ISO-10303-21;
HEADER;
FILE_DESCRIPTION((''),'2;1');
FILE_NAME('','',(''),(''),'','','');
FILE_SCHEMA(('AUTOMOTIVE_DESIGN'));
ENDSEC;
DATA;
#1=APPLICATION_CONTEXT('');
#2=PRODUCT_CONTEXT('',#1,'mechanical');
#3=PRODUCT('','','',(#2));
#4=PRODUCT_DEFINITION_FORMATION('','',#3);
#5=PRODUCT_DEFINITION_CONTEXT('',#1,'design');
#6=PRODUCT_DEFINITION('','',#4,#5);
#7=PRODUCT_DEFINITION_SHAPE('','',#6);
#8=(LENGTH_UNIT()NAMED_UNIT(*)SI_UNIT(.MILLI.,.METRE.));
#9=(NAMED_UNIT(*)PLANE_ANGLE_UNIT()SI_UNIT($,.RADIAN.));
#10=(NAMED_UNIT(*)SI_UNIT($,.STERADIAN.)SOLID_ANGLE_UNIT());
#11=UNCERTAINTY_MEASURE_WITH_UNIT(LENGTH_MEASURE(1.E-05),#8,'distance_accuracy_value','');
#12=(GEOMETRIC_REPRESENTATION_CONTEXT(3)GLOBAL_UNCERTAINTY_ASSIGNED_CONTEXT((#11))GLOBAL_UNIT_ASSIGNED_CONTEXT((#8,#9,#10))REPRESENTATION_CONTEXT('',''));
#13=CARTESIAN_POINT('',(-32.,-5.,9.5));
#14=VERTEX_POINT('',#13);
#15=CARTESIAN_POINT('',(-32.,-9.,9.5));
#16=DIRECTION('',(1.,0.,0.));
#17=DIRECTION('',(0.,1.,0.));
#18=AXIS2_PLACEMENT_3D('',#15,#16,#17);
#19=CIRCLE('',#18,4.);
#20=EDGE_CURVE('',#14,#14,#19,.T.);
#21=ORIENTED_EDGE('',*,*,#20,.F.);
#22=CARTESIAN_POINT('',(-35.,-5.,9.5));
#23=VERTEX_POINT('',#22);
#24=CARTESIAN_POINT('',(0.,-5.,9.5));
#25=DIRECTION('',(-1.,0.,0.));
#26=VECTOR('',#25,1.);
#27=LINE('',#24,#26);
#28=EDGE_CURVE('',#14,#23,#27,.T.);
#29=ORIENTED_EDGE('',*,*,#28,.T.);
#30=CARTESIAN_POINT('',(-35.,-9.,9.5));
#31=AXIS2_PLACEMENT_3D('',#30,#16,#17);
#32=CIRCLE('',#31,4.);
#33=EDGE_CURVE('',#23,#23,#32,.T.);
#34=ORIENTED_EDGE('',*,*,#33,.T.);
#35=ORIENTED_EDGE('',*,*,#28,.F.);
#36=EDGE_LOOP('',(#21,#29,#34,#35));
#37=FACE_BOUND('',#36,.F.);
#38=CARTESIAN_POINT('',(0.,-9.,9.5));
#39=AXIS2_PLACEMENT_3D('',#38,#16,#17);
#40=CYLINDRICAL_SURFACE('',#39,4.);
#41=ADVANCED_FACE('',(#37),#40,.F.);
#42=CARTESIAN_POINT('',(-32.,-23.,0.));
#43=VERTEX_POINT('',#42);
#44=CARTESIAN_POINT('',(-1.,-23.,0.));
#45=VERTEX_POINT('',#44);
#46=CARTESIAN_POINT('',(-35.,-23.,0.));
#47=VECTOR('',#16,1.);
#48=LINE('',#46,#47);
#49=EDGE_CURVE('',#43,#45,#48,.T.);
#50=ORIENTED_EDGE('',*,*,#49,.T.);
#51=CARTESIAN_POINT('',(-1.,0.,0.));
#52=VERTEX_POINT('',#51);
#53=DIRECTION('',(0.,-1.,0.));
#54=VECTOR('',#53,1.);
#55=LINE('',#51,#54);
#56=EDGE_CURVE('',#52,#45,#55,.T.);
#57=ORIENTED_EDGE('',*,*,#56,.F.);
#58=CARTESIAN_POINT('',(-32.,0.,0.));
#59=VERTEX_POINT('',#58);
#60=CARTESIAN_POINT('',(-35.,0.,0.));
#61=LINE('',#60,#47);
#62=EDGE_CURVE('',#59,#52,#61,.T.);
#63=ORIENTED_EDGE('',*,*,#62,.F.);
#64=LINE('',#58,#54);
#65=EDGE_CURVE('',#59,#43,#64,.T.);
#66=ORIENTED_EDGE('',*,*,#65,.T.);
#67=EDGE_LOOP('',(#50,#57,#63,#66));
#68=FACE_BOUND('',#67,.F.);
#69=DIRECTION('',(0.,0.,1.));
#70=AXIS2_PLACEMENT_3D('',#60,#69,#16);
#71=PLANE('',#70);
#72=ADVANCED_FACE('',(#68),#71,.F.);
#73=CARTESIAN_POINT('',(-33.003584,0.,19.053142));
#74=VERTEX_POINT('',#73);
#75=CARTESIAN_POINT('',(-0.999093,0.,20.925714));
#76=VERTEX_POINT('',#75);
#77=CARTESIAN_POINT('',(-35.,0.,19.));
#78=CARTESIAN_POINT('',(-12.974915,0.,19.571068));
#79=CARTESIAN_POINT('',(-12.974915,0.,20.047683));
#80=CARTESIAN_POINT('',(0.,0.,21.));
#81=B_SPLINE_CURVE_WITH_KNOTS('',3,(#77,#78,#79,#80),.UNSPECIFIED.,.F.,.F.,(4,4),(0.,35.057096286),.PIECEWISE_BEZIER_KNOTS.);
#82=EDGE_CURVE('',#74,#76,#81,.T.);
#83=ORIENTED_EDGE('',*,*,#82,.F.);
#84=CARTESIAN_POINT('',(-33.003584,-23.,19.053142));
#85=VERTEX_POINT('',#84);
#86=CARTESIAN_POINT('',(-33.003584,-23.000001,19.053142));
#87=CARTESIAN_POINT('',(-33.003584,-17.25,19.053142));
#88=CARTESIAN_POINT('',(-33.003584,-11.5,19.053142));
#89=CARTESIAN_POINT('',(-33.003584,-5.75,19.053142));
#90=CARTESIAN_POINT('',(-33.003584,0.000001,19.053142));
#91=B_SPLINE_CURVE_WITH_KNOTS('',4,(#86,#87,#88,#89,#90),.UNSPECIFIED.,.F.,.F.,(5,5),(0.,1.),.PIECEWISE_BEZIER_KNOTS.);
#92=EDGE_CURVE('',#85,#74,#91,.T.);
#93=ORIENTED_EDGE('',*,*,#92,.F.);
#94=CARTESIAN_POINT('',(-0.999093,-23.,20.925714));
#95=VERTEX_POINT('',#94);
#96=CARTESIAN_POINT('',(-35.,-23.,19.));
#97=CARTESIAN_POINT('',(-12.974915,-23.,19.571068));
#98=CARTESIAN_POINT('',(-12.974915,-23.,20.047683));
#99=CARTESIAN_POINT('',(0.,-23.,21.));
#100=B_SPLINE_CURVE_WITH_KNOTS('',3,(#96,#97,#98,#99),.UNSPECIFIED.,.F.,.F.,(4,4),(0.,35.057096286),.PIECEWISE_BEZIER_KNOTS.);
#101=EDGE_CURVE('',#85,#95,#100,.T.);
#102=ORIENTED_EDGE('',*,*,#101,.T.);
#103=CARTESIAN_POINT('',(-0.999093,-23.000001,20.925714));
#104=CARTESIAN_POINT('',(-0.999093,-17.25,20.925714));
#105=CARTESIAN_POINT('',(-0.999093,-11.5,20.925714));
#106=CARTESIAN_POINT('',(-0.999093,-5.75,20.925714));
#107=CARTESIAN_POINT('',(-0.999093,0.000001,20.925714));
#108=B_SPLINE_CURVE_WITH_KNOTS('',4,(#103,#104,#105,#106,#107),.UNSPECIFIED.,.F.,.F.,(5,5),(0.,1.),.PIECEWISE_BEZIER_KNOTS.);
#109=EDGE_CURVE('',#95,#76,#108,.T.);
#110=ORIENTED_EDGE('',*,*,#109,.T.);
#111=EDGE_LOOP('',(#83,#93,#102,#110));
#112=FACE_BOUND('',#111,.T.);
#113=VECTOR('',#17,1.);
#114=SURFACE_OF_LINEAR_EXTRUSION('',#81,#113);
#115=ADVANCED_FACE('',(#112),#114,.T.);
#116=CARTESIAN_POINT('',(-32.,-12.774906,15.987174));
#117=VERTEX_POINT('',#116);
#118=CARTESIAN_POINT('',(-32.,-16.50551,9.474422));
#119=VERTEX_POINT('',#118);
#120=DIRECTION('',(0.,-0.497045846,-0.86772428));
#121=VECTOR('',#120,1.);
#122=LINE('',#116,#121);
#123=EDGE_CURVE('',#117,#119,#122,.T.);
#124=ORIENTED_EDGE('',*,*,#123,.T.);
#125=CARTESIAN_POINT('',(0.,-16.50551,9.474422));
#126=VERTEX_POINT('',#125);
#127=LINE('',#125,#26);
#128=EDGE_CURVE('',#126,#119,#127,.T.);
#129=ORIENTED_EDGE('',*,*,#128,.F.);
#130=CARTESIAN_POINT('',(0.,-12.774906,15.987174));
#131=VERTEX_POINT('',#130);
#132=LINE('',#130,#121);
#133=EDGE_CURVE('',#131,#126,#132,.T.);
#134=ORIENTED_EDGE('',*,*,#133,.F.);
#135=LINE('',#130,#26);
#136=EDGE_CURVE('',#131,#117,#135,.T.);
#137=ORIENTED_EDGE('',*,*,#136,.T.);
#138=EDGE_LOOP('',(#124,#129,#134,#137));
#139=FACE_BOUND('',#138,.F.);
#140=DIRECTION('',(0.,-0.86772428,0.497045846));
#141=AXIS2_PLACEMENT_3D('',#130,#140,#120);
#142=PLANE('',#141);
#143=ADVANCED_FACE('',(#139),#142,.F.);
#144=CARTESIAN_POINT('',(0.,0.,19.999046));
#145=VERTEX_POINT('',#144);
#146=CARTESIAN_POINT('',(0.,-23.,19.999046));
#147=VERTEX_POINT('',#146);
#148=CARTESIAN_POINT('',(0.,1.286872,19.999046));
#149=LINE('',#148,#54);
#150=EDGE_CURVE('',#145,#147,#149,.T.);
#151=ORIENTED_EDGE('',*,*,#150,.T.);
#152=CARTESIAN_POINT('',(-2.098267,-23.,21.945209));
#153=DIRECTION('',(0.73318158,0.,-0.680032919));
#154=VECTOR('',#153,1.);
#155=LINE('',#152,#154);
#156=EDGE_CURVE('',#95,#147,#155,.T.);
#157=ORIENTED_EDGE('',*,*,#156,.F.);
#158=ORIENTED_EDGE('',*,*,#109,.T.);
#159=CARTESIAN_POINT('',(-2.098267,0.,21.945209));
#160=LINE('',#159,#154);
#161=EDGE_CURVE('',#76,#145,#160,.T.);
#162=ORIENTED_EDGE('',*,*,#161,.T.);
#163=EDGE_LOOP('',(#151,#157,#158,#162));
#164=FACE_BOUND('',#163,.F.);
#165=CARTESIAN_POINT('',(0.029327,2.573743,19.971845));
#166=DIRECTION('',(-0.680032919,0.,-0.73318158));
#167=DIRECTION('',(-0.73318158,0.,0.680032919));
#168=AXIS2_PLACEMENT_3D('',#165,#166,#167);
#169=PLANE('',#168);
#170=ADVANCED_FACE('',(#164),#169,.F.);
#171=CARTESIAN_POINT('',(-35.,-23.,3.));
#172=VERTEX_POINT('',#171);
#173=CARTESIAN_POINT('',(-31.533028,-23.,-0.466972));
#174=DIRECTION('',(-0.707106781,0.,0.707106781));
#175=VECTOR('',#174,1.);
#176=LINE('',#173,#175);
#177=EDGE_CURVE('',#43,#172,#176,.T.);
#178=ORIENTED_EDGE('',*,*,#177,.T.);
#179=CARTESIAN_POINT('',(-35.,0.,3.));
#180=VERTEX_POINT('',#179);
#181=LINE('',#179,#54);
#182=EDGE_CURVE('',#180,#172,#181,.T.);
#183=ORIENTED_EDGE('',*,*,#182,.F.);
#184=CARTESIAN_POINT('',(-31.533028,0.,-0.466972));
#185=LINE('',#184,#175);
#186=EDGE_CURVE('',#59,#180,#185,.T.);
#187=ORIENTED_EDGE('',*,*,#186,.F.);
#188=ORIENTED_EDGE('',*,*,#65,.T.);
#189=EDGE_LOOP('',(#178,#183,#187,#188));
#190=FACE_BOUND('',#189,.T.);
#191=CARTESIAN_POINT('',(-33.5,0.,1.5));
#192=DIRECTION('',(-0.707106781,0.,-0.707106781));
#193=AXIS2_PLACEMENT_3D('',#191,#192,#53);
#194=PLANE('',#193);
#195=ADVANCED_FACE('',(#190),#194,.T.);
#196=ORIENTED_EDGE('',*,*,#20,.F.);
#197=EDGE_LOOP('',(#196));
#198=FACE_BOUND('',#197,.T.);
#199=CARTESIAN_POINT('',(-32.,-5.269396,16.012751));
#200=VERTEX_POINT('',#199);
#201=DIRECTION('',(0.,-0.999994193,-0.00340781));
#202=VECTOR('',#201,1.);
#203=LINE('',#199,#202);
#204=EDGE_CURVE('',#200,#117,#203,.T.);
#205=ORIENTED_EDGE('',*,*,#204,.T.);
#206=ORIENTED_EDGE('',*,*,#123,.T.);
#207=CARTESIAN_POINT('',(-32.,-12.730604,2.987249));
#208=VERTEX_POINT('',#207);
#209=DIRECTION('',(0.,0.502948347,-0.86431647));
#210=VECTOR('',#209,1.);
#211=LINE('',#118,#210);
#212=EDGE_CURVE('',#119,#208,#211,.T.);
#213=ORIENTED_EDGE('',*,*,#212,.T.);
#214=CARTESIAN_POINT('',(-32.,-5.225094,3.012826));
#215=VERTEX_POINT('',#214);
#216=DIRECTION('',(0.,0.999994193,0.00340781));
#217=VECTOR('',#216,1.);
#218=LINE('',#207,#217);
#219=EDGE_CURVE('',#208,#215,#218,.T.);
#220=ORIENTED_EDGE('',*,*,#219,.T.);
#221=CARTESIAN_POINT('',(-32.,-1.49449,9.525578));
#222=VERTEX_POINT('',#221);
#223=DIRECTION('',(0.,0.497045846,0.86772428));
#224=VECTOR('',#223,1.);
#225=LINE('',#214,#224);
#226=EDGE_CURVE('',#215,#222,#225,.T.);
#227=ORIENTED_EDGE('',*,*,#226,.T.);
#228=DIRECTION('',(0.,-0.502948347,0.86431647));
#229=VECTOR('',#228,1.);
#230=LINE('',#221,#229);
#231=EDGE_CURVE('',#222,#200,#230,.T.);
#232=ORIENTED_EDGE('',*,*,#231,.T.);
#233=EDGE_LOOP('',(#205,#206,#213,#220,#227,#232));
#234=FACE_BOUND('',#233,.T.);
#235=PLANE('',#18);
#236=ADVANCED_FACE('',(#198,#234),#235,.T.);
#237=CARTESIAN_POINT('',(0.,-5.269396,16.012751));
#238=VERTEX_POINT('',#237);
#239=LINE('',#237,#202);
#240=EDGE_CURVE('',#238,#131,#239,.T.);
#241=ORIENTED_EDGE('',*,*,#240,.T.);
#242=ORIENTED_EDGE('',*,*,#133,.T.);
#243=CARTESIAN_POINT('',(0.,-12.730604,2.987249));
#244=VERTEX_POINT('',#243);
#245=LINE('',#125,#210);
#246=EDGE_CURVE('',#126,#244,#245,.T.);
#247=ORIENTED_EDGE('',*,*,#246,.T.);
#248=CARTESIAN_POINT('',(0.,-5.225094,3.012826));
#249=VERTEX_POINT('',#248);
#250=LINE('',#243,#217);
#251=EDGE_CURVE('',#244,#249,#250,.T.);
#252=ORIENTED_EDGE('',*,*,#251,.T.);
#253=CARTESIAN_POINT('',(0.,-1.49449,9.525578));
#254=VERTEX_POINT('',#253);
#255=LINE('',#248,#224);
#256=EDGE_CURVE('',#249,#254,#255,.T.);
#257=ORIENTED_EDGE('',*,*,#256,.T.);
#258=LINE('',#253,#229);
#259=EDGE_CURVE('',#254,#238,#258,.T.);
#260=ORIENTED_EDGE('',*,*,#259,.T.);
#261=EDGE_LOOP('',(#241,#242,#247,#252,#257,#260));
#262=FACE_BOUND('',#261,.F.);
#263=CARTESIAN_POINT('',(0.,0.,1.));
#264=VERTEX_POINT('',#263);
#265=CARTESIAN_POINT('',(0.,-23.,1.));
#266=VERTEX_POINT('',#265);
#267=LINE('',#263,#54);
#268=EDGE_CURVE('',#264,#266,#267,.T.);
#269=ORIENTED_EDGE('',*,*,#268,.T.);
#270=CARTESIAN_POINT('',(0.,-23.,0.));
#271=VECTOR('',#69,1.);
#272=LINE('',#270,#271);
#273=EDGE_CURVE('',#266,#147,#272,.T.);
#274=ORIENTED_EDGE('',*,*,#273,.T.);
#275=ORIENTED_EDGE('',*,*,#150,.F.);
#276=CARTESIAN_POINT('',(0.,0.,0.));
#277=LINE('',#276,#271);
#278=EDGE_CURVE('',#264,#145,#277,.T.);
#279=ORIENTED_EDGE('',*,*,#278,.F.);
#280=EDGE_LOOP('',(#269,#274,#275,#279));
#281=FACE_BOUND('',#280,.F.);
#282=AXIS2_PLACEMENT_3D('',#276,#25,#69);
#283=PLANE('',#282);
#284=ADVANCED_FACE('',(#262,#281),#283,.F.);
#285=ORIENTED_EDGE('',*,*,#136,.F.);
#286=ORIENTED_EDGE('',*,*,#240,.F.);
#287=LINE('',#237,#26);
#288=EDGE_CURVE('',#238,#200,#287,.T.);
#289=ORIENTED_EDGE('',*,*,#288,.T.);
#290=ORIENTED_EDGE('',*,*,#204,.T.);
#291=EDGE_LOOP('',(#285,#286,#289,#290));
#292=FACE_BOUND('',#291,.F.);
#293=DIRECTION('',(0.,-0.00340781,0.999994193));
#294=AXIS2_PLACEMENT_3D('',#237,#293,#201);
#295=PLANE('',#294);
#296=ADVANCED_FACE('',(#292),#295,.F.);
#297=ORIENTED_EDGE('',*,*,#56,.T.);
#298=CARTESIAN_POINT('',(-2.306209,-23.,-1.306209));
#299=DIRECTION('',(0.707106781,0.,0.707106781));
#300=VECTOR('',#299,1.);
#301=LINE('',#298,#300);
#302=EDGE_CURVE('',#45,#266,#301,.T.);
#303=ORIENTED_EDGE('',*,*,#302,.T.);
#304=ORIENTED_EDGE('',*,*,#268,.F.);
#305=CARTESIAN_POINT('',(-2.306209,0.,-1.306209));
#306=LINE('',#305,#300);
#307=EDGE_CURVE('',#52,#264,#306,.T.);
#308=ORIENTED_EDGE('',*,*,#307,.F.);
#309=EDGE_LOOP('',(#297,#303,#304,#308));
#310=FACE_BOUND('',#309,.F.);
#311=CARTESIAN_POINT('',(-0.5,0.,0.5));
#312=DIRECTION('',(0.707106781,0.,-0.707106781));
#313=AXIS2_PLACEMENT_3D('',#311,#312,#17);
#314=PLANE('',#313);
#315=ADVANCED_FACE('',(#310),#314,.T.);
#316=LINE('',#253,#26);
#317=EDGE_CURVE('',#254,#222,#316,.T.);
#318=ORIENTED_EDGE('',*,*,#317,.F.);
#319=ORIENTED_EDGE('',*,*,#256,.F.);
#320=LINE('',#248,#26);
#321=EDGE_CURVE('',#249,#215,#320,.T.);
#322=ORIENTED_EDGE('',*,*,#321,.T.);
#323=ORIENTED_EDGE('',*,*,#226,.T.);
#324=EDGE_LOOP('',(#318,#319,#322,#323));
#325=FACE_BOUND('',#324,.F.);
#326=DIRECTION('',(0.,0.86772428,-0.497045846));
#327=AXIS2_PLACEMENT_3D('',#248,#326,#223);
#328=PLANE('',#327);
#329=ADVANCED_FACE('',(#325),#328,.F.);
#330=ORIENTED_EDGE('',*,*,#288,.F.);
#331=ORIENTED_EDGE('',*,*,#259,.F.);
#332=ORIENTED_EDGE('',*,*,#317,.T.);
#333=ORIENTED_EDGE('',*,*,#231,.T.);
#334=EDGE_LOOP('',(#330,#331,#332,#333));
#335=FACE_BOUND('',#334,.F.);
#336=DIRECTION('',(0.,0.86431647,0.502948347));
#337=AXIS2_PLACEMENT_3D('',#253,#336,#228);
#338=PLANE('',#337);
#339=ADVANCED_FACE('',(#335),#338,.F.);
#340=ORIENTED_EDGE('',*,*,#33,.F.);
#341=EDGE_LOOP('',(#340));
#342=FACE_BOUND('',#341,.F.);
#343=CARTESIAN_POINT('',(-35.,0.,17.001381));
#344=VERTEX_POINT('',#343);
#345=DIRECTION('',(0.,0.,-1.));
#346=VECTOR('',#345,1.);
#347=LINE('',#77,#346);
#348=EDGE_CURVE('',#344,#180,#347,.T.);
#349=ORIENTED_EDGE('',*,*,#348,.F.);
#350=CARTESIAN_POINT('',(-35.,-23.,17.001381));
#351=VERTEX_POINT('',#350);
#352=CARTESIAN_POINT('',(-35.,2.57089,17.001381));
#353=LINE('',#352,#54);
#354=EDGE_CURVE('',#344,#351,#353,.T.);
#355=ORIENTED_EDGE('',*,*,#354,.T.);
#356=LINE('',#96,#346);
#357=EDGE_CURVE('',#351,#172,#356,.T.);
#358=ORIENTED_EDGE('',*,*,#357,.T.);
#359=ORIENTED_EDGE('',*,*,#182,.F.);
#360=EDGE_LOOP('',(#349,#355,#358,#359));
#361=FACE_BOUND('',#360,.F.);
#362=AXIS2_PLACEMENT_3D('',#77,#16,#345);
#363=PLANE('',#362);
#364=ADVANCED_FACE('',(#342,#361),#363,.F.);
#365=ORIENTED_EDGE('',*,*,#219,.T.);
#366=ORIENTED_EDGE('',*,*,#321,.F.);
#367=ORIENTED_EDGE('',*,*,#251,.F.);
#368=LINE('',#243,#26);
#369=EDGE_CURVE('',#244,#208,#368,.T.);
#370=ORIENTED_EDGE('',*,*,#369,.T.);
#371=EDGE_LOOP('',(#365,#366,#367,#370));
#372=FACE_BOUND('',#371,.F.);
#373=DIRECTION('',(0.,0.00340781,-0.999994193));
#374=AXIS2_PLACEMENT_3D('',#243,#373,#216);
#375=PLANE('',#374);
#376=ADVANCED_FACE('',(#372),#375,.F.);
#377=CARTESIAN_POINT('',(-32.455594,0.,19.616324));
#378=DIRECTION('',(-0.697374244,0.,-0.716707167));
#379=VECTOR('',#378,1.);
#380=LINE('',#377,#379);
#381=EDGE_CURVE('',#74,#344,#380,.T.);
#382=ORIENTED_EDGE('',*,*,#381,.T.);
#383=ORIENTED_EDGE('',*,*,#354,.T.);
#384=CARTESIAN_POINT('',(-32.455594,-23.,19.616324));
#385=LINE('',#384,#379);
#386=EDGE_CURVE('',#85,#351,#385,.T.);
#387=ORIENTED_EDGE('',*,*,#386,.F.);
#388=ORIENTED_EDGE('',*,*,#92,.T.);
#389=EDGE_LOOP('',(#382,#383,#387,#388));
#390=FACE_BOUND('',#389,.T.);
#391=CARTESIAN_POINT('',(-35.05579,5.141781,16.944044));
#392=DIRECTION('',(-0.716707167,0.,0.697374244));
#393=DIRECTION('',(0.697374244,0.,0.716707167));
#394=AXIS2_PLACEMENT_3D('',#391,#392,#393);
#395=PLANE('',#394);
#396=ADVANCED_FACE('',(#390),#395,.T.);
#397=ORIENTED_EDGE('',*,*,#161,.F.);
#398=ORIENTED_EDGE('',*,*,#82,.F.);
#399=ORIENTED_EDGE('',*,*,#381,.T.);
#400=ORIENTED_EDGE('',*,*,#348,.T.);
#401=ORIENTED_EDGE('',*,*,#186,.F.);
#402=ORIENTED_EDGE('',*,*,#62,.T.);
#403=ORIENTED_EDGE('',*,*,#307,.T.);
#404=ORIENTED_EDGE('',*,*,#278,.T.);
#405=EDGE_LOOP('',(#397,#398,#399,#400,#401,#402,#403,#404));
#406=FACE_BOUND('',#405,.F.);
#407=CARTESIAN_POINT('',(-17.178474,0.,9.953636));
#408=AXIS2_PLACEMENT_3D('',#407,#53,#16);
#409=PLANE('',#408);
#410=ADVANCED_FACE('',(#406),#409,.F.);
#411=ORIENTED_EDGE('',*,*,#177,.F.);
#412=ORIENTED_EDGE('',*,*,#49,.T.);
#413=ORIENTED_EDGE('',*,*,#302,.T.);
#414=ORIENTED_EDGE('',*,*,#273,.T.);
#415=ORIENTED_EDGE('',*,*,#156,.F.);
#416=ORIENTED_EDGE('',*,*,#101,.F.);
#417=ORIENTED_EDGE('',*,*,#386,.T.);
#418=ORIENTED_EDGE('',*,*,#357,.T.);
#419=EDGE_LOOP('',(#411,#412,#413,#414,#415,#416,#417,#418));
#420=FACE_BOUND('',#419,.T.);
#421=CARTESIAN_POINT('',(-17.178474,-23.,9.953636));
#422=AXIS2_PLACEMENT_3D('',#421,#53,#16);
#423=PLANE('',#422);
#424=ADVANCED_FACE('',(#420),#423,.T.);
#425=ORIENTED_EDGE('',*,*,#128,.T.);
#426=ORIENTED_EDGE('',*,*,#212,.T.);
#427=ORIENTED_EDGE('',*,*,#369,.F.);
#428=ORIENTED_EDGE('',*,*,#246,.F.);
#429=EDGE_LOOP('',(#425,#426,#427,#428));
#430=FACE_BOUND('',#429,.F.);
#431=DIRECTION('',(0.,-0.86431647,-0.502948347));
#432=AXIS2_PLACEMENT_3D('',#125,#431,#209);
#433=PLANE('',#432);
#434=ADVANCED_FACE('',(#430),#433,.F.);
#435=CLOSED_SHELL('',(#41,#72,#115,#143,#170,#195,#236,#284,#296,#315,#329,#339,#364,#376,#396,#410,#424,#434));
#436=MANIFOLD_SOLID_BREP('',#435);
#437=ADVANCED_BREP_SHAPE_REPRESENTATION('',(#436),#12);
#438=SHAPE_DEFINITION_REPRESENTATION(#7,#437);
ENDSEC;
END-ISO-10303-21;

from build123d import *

# Parameters (mm, degrees)
F1_DEPTH    = 23
F2_R        = 4
F3_DEPTH    = 35.0010001
F5_DEPTH    = 32
F6_SIZE     = 1
F7_T1_DEPTH = 28.1474867513
F8_T1_DEPTH = 33.2835617863
F9_SIZE     = 3


# Not quite as in the source:
# - a fillet or chamfer that OpenCascade refuses, or shapes differently, is made with other operations: its cross-section is extruded or revolved along the edge and cut away or added


with BuildPart() as f1:
    # F0 (on Front) → F1 (new body)
    with BuildSketch(Plane.XZ):
        with BuildLine():
            Line((-35, 0), (0, 0))
            Line((0, 0), (0, 21))
            add(Edge.make_bspline(
                [(-35, 19), (-12.9749150947, 19.5710677654), (-12.9749150947, 20.0476832688), (0, 21)],
                knots=[0, 0, 0, 0, 35.0570962859, 35.0570962859, 35.0570962859, 35.0570962859], degree=3))
            Line((-35, 19), (-35, 0))
        make_face()
    extrude(amount=F1_DEPTH)

    # F2 (on Right) → F3 (cut, through all)
    with BuildSketch(Plane.YZ):
        with Locations((-9, 9.5)):
            Circle(F2_R)
    extrude(amount=-F3_DEPTH, mode=Mode.SUBTRACT)

    # F4 (on Right) → F5 (cut)
    with BuildSketch(Plane.YZ):
        Polygon((-5.225094273, 3.0128264948), (-1.4944900823, 9.5255775039), (-5.2693958093, 16.012751009), (-12.774905727, 15.9871735052), (-16.5055099177, 9.4744224961), (-12.7306041907, 2.987248991), align=None)
    extrude(amount=-F5_DEPTH, mode=Mode.SUBTRACT)

    # F6
    f6_edges = [f1.edges().sort_by_distance(p)[0] for p in [
        (0, -11.5, 0),
    ]]
    chamfer(f6_edges, length=F6_SIZE)

    # F7: chamfer of 1 on 1 edges, made by hand

    # F7_s2 → F7_t1 (cut)
    with BuildSketch(Plane.XZ.offset(-2.5737433757)):
        with BuildLine():
            Line((0.0293272632, 19.9718445491), (-1.0284200625, 20.9529152979))
            Line((-1.0284200625, 20.9529152979), (-1.0299222717, 20.9728588023))
            ThreePointArc((-1.0299222717, 20.9728588023), (-0.5146246013, 20.9820315927), (-0.0014639972, 21.0199463458))
            Line((-0.0014639972, 21.0199463458), (0.02, 21))
            ThreePointArc((0.02, 21), (0.02, 20.4859222745), (0.0493272632, 19.9718445491))
            Line((0.0493272632, 19.9718445491), (0.0293272632, 19.9718445491))
        make_face()
    extrude(amount=F7_T1_DEPTH, mode=Mode.SUBTRACT)

    # F8: chamfer of 2 on 1 edges, made by hand

    # F8_s2 → F8_t1 (cut)
    with BuildSketch(Plane.XZ.offset(-5.1417808931)):
        with BuildLine():
            Line((-35.0557899395, 16.944044455), (-32.9477944744, 19.1104787201))
            Line((-32.9477944744, 19.1104787201), (-32.9488880075, 19.1504637697))
            ThreePointArc((-32.9488880075, 19.1504637697), (-33.974209491, 19.0669652644), (-35.001036774, 19.0399865615))
            Line((-35.001036774, 19.0399865615), (-35.04, 19))
            ThreePointArc((-35.04, 19), (-35.04, 17.9720222275), (-35.0957899395, 16.944044455))
            Line((-35.0957899395, 16.944044455), (-35.0557899395, 16.944044455))
        make_face()
    extrude(amount=F8_T1_DEPTH, mode=Mode.SUBTRACT)

    # F9
    f9_edges = [f1.edges().sort_by_distance(p)[0] for p in [
        (-35, -11.5, 0),
    ]]
    chamfer(f9_edges, length=F9_SIZE)


solid = f1.part
